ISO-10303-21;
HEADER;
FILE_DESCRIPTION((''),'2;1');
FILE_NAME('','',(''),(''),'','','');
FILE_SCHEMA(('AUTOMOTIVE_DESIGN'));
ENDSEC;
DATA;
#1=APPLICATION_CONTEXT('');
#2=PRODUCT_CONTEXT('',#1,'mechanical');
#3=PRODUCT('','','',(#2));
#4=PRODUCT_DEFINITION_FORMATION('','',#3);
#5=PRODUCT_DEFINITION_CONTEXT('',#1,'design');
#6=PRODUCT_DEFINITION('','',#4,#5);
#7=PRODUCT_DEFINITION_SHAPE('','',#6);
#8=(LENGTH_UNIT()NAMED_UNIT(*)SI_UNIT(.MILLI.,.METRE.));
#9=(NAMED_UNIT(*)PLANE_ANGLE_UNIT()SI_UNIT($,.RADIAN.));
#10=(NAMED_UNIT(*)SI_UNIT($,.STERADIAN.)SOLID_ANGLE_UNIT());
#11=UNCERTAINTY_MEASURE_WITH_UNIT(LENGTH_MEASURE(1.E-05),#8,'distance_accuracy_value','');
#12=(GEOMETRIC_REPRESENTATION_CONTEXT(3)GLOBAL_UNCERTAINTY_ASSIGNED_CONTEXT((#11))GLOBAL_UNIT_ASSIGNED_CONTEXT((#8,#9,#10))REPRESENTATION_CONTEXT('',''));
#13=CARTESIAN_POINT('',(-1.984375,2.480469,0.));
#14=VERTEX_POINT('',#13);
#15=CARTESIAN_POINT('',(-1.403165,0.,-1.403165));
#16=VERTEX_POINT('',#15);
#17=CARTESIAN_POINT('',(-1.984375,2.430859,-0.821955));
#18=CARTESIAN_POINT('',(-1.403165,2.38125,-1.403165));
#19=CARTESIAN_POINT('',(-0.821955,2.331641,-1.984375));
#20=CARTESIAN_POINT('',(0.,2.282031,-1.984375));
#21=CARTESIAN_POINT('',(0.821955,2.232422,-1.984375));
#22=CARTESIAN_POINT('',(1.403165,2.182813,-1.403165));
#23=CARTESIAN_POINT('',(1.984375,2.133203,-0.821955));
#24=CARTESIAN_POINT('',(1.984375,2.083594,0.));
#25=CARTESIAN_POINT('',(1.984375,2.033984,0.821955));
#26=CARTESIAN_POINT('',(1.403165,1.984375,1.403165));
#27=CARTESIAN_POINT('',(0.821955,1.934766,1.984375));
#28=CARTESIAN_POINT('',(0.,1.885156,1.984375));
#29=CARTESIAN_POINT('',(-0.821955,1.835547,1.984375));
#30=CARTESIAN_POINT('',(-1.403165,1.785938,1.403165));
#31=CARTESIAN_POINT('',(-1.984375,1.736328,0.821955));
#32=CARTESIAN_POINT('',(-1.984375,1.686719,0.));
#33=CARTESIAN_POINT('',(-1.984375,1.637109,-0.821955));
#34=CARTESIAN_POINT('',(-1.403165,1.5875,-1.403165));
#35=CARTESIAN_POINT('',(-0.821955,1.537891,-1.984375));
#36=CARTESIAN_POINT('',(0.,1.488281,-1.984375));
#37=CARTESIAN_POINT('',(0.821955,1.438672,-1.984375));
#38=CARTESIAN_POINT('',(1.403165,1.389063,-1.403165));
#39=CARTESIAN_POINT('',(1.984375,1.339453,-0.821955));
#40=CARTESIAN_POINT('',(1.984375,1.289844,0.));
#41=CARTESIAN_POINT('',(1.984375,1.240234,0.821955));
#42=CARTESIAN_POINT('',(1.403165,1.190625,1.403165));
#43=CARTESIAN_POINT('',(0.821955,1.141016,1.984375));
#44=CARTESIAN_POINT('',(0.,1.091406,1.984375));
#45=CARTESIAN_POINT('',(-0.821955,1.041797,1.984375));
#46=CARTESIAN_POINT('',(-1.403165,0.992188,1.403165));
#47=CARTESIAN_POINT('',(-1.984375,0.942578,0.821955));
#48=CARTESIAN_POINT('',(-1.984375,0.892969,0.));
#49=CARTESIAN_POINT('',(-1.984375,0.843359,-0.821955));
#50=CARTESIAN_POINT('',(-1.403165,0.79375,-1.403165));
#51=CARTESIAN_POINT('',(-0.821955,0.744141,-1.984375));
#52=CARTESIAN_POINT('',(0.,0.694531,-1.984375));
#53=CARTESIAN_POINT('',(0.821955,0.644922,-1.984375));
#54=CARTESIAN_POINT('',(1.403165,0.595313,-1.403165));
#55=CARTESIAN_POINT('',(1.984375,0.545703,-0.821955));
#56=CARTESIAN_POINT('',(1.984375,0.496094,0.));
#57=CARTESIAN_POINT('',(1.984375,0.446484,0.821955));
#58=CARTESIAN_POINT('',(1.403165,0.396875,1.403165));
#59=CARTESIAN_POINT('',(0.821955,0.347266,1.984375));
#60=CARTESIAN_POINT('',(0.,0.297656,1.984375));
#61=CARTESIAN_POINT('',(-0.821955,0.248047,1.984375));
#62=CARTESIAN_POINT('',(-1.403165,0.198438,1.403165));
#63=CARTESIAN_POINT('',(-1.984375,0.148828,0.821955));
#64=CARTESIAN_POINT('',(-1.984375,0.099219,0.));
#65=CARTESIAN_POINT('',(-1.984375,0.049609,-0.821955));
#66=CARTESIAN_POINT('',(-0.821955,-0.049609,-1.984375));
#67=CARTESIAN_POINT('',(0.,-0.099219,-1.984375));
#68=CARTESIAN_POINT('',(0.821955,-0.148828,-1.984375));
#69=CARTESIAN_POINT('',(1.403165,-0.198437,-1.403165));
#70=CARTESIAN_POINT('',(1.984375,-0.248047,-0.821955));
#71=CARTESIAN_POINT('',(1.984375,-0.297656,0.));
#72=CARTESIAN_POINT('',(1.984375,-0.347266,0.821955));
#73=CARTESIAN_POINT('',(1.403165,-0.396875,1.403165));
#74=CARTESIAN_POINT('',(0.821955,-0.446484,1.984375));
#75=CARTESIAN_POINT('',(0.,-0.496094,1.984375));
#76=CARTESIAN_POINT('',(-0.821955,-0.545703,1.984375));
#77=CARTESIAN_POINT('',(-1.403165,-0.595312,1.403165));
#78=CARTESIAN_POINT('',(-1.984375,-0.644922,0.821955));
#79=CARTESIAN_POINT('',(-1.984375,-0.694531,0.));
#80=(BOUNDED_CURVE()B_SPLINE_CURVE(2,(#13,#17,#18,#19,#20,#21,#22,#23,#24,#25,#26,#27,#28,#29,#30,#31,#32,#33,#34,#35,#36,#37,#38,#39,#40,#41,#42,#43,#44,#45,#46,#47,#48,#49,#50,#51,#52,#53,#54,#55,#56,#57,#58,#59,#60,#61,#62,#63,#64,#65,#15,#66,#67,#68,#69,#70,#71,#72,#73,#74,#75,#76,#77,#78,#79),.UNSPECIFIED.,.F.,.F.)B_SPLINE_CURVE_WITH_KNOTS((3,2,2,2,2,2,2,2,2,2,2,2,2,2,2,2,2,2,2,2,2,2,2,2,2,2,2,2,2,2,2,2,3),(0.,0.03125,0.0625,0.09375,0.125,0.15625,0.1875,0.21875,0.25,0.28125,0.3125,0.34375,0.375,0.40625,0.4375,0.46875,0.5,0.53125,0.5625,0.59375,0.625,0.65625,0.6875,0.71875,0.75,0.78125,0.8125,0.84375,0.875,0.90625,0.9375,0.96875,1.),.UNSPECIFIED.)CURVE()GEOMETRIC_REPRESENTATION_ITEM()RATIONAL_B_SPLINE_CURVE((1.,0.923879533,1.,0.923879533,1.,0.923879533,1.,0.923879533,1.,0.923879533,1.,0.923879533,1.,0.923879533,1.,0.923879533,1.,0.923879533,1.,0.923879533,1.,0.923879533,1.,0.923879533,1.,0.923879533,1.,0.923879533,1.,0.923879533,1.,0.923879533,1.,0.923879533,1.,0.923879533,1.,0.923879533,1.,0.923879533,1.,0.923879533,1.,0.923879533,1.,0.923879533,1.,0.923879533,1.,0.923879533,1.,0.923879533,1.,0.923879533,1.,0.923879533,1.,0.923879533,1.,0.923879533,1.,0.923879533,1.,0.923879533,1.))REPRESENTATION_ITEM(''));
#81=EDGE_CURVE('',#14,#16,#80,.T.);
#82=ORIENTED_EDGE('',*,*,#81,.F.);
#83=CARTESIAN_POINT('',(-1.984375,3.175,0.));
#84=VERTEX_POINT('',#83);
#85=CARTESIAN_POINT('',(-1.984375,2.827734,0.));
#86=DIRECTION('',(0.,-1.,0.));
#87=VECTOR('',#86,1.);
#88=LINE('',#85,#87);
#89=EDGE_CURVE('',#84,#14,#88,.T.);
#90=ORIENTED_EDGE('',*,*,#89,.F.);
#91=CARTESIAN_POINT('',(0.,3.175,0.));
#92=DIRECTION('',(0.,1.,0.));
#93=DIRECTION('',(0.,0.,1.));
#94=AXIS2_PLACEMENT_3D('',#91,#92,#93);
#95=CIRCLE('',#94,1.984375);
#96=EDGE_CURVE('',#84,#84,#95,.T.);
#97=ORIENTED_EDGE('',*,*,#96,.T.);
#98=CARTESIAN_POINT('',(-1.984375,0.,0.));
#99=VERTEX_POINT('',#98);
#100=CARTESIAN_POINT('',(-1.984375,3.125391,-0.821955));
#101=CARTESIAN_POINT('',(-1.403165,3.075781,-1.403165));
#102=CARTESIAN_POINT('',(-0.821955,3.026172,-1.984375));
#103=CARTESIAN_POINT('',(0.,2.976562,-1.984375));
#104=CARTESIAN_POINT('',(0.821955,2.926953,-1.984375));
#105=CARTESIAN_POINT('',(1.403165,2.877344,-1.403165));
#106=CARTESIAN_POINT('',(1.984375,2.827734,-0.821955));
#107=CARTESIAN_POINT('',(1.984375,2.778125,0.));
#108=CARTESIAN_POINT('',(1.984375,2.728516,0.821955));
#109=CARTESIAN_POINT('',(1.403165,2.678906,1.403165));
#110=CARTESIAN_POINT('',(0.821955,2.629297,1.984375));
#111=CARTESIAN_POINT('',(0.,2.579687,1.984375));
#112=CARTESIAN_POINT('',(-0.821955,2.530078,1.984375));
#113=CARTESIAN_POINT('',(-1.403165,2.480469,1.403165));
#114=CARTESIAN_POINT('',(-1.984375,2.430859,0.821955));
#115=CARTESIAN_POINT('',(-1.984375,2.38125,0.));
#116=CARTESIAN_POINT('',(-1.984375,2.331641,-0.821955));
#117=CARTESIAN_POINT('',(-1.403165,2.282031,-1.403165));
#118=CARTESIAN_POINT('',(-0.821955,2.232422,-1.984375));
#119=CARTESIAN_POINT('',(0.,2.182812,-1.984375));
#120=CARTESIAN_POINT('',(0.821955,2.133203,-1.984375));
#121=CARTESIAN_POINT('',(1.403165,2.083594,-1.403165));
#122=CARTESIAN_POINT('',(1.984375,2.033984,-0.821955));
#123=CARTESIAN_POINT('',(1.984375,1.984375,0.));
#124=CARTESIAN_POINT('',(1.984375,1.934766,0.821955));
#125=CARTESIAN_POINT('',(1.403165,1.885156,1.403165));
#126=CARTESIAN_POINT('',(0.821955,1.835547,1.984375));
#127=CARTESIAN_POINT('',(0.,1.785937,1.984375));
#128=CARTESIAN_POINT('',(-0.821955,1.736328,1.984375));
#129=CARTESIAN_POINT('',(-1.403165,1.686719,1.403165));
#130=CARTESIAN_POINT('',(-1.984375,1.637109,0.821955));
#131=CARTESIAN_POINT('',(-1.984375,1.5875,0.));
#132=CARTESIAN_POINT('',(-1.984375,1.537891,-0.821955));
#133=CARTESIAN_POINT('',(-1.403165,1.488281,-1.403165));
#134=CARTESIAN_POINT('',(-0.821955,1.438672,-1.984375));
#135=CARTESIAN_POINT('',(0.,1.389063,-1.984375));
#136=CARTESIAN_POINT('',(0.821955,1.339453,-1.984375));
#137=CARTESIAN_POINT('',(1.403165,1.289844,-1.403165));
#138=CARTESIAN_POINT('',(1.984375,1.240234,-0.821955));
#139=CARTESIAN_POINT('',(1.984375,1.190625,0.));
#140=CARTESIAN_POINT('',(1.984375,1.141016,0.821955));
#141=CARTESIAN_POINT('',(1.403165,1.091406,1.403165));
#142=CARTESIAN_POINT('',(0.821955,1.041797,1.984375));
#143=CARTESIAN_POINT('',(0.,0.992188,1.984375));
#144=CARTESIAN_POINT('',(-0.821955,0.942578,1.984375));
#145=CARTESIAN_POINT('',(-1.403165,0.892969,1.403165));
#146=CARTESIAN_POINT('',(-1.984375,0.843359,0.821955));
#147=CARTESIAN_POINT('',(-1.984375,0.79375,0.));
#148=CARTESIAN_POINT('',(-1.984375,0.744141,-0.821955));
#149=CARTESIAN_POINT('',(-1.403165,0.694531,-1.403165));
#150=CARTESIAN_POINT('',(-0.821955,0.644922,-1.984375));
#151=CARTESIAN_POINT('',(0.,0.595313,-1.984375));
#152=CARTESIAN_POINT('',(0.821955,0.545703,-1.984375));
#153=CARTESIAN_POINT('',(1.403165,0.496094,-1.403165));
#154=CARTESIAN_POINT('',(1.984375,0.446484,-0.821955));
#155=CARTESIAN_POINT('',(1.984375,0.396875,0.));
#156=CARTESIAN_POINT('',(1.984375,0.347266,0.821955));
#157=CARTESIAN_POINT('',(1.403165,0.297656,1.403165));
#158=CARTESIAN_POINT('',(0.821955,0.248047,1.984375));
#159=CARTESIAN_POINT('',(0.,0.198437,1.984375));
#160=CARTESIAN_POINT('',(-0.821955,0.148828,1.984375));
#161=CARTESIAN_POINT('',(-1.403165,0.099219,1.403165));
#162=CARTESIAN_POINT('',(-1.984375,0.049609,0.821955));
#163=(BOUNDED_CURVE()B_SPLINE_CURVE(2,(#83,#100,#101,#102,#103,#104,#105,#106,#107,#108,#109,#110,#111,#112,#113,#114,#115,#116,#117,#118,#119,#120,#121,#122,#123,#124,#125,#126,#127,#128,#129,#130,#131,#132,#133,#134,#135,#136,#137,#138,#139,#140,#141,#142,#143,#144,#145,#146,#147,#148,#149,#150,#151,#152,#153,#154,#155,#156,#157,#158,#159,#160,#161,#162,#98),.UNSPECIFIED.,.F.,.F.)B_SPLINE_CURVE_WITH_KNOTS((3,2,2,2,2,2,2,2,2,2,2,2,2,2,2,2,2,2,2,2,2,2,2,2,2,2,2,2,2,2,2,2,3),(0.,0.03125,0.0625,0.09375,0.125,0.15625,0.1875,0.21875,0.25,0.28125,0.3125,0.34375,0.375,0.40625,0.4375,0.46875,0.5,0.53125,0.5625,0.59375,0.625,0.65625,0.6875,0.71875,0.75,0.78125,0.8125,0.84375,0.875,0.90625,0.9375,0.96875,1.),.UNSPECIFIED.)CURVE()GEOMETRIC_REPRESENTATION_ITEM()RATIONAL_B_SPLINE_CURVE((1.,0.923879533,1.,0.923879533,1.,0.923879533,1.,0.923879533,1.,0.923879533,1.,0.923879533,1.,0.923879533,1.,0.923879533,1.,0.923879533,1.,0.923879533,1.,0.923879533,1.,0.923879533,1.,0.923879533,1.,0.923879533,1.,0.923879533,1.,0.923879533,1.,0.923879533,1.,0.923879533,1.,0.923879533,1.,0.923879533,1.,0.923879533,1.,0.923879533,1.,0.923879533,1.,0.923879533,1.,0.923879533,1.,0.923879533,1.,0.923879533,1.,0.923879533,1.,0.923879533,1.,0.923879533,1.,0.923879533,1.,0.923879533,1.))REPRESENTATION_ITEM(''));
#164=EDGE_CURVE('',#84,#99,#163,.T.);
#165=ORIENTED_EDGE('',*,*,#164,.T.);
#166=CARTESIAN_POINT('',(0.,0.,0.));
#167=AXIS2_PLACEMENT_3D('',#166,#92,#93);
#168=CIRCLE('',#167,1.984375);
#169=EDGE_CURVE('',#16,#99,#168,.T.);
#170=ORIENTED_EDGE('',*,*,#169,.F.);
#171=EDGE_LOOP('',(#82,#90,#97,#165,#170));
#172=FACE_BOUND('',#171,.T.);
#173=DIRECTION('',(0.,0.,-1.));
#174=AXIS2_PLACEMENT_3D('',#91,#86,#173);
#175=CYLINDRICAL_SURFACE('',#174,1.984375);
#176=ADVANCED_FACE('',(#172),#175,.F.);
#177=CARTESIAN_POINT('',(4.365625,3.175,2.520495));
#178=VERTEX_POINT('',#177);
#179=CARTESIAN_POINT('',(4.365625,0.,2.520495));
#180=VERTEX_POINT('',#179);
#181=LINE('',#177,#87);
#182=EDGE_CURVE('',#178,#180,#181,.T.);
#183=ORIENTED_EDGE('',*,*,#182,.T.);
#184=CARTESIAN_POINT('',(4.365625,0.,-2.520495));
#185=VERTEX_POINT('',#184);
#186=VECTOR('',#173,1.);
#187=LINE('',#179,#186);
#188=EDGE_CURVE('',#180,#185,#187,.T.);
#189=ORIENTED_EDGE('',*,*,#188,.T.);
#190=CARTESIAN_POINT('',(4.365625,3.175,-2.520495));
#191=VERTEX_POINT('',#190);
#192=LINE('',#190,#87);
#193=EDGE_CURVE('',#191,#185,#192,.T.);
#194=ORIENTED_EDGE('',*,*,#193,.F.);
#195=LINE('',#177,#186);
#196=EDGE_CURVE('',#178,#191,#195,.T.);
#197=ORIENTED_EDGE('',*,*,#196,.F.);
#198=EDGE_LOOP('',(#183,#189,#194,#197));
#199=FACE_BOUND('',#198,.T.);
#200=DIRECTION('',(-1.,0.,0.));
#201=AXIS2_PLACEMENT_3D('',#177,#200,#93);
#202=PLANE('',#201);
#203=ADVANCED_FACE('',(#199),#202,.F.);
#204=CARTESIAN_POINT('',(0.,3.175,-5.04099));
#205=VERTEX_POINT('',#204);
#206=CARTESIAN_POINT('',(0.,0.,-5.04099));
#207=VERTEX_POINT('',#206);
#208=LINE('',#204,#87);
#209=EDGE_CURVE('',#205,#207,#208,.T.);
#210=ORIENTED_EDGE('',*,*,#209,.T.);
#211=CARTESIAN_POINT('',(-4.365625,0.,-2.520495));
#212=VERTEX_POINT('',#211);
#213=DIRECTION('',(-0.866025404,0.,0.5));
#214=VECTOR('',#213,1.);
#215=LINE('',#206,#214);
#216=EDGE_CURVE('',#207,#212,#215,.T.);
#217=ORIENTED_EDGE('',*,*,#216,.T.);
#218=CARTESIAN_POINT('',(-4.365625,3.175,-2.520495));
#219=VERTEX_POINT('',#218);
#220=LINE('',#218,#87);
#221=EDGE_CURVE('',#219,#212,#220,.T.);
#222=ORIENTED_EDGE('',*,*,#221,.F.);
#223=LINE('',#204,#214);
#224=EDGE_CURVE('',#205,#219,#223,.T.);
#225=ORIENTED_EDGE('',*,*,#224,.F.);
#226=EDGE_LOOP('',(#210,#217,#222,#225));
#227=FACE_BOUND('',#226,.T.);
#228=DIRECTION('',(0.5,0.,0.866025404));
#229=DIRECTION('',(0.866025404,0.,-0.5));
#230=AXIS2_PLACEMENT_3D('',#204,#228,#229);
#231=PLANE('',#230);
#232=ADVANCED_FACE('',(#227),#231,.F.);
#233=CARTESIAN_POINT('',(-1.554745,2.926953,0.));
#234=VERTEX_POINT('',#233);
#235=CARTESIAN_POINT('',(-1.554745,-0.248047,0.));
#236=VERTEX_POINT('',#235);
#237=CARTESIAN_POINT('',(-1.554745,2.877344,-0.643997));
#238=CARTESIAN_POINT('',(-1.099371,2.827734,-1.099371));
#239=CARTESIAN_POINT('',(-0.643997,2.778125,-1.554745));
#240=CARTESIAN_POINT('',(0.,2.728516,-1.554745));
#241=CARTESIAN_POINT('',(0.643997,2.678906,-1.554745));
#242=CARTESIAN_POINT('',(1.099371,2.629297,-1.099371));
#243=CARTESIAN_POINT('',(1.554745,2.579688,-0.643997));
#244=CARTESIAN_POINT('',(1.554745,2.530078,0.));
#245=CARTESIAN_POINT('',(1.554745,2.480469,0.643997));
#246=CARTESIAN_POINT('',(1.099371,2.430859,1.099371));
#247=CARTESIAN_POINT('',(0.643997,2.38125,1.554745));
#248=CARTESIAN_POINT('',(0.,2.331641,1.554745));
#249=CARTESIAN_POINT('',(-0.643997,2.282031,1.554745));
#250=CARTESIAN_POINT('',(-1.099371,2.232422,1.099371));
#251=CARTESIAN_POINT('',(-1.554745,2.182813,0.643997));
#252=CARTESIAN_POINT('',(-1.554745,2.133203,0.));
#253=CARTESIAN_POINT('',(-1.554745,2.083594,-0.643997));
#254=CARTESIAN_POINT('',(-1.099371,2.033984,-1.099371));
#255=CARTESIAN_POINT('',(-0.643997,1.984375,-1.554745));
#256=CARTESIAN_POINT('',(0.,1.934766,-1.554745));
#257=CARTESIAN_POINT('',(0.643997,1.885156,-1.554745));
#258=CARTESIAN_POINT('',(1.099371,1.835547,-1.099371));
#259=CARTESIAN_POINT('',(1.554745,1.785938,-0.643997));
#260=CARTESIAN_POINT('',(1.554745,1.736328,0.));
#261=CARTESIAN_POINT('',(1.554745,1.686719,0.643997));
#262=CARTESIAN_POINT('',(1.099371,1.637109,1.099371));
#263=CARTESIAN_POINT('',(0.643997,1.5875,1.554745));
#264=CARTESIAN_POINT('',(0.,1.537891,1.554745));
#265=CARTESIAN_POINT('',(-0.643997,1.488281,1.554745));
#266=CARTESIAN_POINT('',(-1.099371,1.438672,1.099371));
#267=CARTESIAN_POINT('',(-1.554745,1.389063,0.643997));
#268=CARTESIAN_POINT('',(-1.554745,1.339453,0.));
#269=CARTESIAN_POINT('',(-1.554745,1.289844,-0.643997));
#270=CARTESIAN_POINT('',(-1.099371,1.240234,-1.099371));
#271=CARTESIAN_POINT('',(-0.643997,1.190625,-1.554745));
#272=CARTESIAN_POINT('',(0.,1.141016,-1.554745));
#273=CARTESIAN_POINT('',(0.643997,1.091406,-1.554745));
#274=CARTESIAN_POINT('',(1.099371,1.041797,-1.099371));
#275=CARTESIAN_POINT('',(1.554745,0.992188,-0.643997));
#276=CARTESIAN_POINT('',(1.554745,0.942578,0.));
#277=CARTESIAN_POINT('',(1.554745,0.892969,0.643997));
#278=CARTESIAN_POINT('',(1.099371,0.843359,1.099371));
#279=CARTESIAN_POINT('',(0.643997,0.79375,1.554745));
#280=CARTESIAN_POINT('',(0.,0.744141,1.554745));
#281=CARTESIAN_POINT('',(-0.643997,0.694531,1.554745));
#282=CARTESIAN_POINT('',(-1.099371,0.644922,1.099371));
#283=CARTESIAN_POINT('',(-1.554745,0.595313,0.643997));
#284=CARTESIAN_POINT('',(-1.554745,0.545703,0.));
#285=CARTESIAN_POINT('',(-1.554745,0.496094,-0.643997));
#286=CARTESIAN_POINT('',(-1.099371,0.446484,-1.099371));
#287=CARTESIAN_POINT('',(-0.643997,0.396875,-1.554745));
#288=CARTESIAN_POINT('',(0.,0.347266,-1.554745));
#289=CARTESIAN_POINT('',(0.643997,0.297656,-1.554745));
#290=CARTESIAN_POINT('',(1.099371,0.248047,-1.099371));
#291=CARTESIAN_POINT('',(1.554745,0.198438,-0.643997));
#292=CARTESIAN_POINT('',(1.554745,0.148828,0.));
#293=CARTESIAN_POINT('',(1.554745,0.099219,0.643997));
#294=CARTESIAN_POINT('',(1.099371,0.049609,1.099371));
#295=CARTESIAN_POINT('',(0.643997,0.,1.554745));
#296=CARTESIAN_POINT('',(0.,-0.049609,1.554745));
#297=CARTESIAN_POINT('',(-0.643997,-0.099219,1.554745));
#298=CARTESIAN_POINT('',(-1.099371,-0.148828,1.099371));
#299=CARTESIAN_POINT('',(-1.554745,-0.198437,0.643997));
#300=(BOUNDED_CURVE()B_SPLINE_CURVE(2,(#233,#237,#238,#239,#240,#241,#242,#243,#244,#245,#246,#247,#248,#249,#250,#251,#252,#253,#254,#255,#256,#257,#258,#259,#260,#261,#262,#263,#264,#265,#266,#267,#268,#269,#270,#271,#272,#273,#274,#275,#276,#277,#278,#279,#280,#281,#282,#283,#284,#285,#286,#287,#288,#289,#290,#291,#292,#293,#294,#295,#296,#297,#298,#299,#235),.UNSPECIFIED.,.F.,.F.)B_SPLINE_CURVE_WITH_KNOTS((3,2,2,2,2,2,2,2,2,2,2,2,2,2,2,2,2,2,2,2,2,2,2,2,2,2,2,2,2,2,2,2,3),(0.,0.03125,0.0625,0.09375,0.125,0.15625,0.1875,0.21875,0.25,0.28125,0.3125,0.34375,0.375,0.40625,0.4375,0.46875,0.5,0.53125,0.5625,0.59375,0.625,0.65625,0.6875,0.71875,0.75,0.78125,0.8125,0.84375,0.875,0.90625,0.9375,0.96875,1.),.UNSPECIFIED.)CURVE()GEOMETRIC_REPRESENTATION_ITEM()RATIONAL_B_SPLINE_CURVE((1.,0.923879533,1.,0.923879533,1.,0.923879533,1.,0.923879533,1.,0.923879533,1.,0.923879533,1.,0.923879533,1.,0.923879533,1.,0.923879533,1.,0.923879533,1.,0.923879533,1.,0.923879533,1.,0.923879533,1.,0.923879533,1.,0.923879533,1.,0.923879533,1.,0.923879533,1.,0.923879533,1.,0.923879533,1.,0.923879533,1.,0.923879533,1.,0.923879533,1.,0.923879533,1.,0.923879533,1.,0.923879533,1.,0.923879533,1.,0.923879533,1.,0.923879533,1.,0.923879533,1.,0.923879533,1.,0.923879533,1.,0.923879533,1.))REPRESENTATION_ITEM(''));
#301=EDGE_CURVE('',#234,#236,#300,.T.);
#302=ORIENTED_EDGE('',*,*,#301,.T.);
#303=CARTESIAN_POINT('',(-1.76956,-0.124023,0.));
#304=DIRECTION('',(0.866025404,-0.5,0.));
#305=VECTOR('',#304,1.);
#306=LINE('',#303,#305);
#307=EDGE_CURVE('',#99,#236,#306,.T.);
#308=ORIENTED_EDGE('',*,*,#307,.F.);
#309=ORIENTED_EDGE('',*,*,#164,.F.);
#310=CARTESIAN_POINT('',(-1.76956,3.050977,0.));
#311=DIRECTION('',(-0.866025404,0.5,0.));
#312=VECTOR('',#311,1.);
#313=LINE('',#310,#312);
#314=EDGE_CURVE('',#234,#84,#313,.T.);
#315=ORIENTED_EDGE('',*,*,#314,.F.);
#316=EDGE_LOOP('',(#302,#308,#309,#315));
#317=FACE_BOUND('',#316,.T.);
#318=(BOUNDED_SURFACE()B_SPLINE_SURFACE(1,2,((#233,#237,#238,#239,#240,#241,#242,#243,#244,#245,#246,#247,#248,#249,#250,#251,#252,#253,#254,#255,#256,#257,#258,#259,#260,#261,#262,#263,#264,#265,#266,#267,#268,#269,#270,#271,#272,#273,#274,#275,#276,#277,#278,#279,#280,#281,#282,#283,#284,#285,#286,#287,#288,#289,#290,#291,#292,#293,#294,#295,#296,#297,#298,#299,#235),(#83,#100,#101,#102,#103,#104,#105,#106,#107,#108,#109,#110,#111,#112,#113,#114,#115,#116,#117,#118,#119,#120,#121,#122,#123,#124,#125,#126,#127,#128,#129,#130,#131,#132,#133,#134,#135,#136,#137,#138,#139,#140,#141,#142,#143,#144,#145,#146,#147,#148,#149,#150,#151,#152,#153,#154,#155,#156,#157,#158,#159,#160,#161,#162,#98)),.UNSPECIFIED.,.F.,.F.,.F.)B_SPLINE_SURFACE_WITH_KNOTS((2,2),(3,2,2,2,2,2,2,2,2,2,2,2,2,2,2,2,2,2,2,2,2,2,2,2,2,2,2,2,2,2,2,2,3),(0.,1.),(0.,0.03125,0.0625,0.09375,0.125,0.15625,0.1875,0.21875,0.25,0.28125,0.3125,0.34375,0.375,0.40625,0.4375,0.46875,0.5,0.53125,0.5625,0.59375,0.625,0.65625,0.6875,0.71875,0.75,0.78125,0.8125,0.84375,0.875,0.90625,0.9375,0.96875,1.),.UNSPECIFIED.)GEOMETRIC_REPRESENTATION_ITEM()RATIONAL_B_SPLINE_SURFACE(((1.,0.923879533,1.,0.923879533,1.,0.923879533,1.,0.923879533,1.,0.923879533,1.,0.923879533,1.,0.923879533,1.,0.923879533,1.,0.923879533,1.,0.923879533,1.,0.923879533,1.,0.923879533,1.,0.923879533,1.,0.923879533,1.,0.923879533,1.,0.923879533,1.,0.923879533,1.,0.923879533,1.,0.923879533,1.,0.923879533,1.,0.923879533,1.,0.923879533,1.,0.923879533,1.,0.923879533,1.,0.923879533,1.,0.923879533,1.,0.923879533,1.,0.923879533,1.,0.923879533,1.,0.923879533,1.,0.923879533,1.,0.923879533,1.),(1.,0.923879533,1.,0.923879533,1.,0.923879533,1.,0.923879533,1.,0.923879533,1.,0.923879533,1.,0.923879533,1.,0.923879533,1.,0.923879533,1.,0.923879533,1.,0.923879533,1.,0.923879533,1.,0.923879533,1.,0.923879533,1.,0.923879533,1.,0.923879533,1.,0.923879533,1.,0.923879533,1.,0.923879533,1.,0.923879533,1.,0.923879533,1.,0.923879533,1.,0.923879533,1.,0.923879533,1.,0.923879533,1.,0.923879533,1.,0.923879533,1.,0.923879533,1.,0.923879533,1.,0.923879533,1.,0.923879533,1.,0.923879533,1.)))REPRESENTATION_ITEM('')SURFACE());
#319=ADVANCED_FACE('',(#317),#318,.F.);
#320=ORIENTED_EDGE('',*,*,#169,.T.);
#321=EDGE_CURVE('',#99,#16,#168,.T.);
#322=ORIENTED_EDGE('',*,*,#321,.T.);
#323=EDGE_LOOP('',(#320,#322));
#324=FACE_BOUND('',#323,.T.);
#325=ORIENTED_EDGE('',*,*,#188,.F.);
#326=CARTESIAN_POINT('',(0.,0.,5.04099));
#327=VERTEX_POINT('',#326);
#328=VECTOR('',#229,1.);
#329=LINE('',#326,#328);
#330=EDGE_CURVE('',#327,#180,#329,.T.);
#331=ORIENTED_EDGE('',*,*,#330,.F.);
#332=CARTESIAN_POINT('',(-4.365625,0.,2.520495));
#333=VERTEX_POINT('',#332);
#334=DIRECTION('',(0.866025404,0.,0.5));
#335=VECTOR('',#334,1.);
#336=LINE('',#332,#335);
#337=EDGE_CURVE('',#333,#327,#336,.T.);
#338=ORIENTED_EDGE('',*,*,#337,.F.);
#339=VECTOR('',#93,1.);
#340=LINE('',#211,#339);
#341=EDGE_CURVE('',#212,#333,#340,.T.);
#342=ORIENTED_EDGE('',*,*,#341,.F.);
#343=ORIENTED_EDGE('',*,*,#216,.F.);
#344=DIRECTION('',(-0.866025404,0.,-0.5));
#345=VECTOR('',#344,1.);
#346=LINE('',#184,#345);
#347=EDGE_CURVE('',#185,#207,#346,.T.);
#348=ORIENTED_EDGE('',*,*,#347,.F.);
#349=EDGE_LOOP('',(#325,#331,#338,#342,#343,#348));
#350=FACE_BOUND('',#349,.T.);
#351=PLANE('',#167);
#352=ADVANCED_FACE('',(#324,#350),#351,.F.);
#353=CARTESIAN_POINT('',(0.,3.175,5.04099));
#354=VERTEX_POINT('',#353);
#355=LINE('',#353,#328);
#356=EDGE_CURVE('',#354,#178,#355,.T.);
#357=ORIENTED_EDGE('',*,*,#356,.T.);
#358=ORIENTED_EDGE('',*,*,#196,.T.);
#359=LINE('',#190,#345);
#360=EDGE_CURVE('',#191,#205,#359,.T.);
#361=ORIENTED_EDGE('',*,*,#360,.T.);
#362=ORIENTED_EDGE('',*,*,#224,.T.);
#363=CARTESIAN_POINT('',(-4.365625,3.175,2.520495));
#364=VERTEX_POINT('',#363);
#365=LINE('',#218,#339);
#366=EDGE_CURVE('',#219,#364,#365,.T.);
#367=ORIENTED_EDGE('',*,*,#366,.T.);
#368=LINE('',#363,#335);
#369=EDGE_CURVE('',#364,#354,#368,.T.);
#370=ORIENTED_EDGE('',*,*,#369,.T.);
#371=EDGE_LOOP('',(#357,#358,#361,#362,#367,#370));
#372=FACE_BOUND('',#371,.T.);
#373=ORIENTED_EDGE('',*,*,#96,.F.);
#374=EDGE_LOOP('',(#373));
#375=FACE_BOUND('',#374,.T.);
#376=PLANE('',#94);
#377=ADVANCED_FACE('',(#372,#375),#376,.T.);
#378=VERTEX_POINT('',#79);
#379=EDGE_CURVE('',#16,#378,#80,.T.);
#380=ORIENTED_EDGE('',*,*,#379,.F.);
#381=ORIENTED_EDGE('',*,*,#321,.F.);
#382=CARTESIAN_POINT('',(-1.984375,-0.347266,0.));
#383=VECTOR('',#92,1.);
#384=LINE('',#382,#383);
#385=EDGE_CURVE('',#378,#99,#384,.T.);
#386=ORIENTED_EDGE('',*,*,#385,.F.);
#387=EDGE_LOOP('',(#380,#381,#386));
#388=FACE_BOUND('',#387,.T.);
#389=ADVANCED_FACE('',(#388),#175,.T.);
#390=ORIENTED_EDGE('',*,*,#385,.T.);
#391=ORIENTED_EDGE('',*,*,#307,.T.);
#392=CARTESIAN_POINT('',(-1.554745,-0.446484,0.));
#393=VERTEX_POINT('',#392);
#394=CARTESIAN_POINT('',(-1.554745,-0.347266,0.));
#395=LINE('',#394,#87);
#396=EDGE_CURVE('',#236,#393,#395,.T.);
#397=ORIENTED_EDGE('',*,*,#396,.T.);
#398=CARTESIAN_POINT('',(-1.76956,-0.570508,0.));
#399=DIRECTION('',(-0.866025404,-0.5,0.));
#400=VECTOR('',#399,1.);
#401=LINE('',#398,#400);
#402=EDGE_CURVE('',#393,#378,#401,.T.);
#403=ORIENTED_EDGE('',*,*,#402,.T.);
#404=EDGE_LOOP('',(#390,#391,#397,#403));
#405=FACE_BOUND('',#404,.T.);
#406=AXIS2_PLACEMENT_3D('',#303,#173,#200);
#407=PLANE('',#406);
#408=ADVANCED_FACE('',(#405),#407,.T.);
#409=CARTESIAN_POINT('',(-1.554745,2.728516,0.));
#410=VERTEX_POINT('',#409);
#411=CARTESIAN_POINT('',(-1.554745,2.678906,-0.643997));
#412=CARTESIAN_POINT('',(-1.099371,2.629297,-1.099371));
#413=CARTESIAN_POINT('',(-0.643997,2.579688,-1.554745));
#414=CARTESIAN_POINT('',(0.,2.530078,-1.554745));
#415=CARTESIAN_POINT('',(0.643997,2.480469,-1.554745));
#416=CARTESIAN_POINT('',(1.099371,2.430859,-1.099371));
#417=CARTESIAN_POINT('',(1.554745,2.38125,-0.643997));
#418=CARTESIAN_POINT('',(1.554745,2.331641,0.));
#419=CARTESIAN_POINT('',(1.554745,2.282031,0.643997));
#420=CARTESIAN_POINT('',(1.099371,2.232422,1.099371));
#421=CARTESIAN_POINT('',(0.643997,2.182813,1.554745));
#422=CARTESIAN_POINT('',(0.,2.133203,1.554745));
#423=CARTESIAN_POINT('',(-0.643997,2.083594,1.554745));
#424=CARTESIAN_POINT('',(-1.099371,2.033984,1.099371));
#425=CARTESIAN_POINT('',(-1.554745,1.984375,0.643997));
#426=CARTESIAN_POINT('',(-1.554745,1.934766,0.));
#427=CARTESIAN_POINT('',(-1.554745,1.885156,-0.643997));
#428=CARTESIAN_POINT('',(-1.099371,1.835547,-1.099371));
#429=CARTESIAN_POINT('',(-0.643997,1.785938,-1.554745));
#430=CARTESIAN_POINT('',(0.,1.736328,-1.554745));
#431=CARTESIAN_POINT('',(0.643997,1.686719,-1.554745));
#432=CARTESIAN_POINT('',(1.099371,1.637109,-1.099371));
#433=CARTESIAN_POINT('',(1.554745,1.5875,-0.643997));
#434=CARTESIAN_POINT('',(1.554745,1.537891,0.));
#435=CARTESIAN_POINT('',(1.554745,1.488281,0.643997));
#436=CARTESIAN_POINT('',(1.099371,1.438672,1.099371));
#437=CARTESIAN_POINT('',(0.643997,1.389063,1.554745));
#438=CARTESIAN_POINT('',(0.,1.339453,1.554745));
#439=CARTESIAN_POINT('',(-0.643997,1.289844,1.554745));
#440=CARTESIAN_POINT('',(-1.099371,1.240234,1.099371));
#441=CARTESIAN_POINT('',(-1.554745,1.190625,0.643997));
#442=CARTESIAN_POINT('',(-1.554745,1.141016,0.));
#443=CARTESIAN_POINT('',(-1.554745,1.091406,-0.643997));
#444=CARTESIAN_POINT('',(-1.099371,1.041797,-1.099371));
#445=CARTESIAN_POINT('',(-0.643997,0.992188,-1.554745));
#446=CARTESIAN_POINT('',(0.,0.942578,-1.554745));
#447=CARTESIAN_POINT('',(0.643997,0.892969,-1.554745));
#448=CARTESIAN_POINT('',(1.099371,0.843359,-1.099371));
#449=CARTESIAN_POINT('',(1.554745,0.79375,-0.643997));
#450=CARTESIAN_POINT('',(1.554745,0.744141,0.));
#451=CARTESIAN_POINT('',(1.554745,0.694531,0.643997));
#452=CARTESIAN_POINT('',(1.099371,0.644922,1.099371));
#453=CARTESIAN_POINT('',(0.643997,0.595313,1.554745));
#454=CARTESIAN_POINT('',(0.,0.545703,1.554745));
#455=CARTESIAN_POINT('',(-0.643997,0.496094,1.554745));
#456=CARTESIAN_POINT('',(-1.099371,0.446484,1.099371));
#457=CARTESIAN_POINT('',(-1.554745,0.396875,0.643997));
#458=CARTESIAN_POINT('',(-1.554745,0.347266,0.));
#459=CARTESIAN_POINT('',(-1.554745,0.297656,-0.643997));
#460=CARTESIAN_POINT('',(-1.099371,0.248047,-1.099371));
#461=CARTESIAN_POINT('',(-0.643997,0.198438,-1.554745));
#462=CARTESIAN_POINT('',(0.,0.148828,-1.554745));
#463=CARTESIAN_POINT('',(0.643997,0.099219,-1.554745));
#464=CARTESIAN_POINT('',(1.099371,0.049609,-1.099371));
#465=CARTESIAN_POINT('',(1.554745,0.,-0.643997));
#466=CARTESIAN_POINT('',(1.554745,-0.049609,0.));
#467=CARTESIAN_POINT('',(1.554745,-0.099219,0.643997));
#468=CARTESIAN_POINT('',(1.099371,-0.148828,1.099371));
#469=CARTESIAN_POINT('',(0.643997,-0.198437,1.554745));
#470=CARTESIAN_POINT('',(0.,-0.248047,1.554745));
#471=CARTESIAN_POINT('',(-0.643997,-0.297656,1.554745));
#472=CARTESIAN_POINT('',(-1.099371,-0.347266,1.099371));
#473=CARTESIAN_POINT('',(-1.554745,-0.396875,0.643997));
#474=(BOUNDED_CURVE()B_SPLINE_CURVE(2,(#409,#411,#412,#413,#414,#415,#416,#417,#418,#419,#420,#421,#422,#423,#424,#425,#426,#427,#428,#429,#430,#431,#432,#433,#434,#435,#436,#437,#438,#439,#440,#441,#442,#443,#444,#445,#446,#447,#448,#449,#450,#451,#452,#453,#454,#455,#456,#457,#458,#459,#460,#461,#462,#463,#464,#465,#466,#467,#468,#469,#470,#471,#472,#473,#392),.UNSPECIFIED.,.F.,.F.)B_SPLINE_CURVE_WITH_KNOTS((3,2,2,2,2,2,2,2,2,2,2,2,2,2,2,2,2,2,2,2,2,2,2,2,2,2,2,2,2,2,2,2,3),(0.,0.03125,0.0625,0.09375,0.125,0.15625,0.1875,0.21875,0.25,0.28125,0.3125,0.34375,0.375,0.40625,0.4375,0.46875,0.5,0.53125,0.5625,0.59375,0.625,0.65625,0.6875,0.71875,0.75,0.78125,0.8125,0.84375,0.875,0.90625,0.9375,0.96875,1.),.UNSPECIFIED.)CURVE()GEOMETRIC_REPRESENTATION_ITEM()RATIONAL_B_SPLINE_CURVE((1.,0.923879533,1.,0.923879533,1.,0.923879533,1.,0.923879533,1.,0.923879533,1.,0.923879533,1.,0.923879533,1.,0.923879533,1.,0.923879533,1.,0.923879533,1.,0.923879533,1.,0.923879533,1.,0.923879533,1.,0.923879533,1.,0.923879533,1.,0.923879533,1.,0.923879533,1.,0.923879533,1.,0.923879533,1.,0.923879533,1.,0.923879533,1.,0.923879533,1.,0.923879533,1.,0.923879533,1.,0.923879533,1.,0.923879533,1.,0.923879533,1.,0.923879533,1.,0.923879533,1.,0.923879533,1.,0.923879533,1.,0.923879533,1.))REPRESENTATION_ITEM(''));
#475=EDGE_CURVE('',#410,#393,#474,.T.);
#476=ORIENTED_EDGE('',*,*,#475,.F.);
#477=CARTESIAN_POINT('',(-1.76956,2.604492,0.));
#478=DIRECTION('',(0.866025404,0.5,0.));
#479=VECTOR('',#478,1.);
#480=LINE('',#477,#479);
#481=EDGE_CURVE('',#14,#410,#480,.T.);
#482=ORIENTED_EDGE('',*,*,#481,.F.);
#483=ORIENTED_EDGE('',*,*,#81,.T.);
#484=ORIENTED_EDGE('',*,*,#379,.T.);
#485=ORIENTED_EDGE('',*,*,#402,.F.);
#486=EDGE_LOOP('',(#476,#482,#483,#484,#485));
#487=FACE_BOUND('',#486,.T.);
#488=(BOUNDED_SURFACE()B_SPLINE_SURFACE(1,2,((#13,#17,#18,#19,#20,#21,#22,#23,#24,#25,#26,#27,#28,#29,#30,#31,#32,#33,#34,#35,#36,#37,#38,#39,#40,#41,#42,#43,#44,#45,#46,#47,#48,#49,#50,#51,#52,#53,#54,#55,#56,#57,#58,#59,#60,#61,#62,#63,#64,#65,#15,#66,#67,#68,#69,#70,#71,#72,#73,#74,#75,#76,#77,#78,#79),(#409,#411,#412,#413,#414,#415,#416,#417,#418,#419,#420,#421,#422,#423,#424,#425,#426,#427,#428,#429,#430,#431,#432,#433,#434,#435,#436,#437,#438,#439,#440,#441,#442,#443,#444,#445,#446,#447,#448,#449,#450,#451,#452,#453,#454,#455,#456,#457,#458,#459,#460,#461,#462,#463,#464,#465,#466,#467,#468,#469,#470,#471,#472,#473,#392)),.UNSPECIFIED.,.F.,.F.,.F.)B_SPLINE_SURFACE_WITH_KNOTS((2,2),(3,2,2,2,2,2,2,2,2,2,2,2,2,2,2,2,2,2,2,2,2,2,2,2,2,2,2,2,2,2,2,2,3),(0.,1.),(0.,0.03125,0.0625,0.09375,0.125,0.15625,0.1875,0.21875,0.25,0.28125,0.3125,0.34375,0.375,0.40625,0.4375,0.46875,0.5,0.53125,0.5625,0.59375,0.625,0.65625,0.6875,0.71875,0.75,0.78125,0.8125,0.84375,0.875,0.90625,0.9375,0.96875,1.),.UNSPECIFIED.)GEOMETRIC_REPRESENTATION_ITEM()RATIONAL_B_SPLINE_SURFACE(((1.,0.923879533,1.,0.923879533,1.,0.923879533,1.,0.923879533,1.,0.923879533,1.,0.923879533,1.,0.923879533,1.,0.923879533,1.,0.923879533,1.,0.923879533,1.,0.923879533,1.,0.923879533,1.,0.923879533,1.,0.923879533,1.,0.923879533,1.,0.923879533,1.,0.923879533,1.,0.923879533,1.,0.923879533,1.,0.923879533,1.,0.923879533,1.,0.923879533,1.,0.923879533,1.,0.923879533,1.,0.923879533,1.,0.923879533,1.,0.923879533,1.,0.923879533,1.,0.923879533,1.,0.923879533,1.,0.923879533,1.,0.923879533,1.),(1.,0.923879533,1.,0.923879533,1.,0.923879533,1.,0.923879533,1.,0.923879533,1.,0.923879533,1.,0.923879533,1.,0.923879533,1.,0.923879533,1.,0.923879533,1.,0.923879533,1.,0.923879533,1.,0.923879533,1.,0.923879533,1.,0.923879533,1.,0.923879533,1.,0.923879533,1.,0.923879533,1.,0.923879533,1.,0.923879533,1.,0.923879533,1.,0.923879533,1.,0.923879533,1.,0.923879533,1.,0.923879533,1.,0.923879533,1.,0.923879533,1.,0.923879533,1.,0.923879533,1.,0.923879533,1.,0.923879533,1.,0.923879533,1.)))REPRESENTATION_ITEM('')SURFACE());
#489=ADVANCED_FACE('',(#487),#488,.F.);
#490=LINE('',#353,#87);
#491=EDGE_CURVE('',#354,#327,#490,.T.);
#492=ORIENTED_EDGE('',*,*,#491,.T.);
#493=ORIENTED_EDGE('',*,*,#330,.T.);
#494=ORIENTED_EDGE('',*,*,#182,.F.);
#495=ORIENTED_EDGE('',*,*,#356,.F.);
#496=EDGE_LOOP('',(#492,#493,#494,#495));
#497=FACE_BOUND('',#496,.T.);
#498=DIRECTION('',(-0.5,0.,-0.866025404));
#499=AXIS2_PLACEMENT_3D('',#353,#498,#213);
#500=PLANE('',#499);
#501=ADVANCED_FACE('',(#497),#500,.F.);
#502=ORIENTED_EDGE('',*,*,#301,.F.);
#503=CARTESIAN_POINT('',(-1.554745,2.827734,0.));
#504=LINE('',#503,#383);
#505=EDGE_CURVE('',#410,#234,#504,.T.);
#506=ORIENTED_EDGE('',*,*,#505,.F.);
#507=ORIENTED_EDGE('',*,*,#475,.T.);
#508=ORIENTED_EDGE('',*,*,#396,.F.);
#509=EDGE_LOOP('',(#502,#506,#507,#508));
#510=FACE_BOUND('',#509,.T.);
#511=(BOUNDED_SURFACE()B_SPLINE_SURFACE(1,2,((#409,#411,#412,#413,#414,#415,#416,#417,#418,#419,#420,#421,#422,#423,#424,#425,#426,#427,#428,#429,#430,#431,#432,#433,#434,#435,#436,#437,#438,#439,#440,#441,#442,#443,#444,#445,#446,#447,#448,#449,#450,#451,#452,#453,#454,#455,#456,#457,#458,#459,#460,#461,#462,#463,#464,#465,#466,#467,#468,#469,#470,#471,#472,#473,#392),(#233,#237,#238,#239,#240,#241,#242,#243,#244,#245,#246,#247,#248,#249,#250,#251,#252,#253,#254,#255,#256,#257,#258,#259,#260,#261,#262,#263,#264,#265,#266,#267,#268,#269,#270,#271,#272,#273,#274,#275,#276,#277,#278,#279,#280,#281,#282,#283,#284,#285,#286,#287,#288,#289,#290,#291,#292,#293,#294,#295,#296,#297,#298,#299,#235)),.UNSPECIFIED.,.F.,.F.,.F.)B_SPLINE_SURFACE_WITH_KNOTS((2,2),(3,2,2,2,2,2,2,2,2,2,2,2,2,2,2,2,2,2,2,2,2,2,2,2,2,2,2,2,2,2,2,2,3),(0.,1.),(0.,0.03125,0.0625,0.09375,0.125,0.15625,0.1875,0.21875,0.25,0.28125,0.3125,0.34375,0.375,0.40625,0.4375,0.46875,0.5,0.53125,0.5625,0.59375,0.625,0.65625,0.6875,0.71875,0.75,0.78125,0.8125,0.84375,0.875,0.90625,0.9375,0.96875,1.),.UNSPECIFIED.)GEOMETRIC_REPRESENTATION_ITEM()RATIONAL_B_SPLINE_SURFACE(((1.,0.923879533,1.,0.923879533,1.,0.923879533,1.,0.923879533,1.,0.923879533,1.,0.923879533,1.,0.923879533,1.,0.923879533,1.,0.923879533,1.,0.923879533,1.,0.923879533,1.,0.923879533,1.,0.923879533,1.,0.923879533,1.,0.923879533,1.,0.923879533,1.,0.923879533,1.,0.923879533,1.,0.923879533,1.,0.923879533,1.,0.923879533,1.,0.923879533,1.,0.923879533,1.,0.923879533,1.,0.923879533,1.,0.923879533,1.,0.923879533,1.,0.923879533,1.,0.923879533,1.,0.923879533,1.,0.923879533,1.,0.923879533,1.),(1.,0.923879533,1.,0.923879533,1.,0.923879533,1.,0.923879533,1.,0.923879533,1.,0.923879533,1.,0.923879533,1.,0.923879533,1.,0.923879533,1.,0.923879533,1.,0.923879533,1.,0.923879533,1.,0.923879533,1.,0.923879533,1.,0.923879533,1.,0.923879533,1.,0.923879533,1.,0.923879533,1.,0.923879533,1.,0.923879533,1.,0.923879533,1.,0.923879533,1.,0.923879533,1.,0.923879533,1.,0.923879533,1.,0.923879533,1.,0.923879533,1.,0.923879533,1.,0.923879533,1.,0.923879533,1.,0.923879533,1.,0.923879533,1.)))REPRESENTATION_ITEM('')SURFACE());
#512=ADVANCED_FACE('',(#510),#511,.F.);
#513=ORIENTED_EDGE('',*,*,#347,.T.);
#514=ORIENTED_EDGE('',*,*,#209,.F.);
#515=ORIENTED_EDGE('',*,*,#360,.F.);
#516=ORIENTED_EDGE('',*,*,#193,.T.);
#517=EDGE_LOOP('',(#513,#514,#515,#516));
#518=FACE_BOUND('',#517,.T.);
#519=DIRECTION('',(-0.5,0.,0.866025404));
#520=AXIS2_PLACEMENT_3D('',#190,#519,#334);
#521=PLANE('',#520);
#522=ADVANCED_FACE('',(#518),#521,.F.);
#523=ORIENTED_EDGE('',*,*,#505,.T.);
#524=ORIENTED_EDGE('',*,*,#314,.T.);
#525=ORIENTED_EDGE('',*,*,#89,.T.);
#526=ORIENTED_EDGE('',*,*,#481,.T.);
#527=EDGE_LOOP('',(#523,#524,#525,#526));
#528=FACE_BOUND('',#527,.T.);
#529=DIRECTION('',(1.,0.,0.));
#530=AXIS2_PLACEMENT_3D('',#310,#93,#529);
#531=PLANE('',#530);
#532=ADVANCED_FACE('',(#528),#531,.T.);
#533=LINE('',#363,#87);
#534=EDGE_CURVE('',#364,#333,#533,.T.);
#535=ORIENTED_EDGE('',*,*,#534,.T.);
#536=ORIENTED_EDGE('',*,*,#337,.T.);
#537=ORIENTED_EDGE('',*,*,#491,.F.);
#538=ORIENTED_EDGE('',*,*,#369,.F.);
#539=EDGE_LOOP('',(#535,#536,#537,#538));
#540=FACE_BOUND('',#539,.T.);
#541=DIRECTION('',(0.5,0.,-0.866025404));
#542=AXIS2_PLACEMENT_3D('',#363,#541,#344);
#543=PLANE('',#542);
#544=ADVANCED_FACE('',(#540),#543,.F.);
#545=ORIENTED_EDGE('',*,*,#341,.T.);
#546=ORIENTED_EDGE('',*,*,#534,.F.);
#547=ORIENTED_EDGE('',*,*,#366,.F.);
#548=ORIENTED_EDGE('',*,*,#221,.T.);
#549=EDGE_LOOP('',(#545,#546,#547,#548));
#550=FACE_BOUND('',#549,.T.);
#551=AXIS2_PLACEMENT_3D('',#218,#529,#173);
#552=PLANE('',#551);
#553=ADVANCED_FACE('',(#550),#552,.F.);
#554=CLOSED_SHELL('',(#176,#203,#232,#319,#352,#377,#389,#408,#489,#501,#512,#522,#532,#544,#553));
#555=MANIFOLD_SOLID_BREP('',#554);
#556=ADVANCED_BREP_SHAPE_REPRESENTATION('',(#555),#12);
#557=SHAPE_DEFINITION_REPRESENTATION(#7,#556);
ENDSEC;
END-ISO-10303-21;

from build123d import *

# Parameters (mm, degrees)
SKETCH1_R           = 1.984375
BOSS_EXTRUDE1_DEPTH = 3.175
THREAD1_PITCH       = 0.79375


with BuildPart() as part:
    # Sketch1 → Boss-Extrude1 (new body)
    with BuildSketch(Plane(origin=(0, 0, 0), x_dir=(1, 0, 0), z_dir=(0, 1, 0))):
        Polygon((0, 5.040989538), (-4.365625, 2.520494769), (-4.365625, -2.520494769), (0, -5.040989538), (4.365625, -2.520494769), (4.365625, 2.520494769), align=None)
        with Locations(Location((0, 0, 0), (0, 0, 270))):
            Circle(SKETCH1_R, mode=Mode.SUBTRACT)
    extrude(amount=BOSS_EXTRUDE1_DEPTH)

    # Thread1: the profile of Thread Profile1 profile screwed along a right-hand helix of 4 turns, 8 arcs to a turn; built about Z, then put on its axis
    thread1_z = Axis((0, 0, 0), (0, 0, 1))
    thread1_corners = [(1.984675, 0, -0.000173205), (1.984675, 0, 0.694704453), (1.554745212, 0, 0.446484374), (1.554745212, 0, 0.248046874)]
    with BuildLine(mode=Mode.PRIVATE) as thread1_profile:
        Line(thread1_corners[0], thread1_corners[1])
        Line(thread1_corners[1], thread1_corners[2])
        Line(thread1_corners[2], thread1_corners[3])
        Line(thread1_corners[3], thread1_corners[0])
    thread1_cap = Face(thread1_profile.wire())
    thread1_turn_angles = [0, 22.5, 45, 67.5, 90, 112.5, 135, 157.5, 180, 202.5, 225, 247.5, 270, 292.5, 315, 337.5, 360]
    thread1_turn_weights = [1, 0.9238795325112867, 1, 0.9238795325112867, 1, 0.9238795325112867, 1, 0.9238795325112867, 1, 0.9238795325112867, 1, 0.9238795325112867, 1, 0.9238795325112867, 1, 0.9238795325112867, 1]
    thread1_turn_rails = [Edge.make_bspline([Vector(p[0], p[1], 0).rotate(thread1_z, thread1_turn_angles[k]) / thread1_turn_weights[k] + Vector(0, 0, p[2] + THREAD1_PITCH * thread1_turn_angles[k] / 360) for k in range(17)], [0, 0, 0, 1, 1, 2, 2, 3, 3, 4, 4, 5, 5, 6, 6, 7, 7, 8, 8, 8], 2, thread1_turn_weights) for p in thread1_corners]
    thread1_turn_sides = [Face.make_surface_from_curves(thread1_turn_rails[p[0]], thread1_turn_rails[p[1]]) for p in [(0, 1), (1, 2), (2, 3), (3, 0)]]
    thread1 = Plane(origin=(0, 3.175, 0), x_dir=(-1, 0, 0), z_dir=(0, -1, 0)) * Solid(Shell([*[p.moved(Location((0, 0, THREAD1_PITCH * i))) for i in range(4) for p in thread1_turn_sides], thread1_cap, thread1_cap.rotate(thread1_z, 1440).moved(Location((0, 0, THREAD1_PITCH * 1440 / 360)))]))
    add(thread1)


solid = part.part
